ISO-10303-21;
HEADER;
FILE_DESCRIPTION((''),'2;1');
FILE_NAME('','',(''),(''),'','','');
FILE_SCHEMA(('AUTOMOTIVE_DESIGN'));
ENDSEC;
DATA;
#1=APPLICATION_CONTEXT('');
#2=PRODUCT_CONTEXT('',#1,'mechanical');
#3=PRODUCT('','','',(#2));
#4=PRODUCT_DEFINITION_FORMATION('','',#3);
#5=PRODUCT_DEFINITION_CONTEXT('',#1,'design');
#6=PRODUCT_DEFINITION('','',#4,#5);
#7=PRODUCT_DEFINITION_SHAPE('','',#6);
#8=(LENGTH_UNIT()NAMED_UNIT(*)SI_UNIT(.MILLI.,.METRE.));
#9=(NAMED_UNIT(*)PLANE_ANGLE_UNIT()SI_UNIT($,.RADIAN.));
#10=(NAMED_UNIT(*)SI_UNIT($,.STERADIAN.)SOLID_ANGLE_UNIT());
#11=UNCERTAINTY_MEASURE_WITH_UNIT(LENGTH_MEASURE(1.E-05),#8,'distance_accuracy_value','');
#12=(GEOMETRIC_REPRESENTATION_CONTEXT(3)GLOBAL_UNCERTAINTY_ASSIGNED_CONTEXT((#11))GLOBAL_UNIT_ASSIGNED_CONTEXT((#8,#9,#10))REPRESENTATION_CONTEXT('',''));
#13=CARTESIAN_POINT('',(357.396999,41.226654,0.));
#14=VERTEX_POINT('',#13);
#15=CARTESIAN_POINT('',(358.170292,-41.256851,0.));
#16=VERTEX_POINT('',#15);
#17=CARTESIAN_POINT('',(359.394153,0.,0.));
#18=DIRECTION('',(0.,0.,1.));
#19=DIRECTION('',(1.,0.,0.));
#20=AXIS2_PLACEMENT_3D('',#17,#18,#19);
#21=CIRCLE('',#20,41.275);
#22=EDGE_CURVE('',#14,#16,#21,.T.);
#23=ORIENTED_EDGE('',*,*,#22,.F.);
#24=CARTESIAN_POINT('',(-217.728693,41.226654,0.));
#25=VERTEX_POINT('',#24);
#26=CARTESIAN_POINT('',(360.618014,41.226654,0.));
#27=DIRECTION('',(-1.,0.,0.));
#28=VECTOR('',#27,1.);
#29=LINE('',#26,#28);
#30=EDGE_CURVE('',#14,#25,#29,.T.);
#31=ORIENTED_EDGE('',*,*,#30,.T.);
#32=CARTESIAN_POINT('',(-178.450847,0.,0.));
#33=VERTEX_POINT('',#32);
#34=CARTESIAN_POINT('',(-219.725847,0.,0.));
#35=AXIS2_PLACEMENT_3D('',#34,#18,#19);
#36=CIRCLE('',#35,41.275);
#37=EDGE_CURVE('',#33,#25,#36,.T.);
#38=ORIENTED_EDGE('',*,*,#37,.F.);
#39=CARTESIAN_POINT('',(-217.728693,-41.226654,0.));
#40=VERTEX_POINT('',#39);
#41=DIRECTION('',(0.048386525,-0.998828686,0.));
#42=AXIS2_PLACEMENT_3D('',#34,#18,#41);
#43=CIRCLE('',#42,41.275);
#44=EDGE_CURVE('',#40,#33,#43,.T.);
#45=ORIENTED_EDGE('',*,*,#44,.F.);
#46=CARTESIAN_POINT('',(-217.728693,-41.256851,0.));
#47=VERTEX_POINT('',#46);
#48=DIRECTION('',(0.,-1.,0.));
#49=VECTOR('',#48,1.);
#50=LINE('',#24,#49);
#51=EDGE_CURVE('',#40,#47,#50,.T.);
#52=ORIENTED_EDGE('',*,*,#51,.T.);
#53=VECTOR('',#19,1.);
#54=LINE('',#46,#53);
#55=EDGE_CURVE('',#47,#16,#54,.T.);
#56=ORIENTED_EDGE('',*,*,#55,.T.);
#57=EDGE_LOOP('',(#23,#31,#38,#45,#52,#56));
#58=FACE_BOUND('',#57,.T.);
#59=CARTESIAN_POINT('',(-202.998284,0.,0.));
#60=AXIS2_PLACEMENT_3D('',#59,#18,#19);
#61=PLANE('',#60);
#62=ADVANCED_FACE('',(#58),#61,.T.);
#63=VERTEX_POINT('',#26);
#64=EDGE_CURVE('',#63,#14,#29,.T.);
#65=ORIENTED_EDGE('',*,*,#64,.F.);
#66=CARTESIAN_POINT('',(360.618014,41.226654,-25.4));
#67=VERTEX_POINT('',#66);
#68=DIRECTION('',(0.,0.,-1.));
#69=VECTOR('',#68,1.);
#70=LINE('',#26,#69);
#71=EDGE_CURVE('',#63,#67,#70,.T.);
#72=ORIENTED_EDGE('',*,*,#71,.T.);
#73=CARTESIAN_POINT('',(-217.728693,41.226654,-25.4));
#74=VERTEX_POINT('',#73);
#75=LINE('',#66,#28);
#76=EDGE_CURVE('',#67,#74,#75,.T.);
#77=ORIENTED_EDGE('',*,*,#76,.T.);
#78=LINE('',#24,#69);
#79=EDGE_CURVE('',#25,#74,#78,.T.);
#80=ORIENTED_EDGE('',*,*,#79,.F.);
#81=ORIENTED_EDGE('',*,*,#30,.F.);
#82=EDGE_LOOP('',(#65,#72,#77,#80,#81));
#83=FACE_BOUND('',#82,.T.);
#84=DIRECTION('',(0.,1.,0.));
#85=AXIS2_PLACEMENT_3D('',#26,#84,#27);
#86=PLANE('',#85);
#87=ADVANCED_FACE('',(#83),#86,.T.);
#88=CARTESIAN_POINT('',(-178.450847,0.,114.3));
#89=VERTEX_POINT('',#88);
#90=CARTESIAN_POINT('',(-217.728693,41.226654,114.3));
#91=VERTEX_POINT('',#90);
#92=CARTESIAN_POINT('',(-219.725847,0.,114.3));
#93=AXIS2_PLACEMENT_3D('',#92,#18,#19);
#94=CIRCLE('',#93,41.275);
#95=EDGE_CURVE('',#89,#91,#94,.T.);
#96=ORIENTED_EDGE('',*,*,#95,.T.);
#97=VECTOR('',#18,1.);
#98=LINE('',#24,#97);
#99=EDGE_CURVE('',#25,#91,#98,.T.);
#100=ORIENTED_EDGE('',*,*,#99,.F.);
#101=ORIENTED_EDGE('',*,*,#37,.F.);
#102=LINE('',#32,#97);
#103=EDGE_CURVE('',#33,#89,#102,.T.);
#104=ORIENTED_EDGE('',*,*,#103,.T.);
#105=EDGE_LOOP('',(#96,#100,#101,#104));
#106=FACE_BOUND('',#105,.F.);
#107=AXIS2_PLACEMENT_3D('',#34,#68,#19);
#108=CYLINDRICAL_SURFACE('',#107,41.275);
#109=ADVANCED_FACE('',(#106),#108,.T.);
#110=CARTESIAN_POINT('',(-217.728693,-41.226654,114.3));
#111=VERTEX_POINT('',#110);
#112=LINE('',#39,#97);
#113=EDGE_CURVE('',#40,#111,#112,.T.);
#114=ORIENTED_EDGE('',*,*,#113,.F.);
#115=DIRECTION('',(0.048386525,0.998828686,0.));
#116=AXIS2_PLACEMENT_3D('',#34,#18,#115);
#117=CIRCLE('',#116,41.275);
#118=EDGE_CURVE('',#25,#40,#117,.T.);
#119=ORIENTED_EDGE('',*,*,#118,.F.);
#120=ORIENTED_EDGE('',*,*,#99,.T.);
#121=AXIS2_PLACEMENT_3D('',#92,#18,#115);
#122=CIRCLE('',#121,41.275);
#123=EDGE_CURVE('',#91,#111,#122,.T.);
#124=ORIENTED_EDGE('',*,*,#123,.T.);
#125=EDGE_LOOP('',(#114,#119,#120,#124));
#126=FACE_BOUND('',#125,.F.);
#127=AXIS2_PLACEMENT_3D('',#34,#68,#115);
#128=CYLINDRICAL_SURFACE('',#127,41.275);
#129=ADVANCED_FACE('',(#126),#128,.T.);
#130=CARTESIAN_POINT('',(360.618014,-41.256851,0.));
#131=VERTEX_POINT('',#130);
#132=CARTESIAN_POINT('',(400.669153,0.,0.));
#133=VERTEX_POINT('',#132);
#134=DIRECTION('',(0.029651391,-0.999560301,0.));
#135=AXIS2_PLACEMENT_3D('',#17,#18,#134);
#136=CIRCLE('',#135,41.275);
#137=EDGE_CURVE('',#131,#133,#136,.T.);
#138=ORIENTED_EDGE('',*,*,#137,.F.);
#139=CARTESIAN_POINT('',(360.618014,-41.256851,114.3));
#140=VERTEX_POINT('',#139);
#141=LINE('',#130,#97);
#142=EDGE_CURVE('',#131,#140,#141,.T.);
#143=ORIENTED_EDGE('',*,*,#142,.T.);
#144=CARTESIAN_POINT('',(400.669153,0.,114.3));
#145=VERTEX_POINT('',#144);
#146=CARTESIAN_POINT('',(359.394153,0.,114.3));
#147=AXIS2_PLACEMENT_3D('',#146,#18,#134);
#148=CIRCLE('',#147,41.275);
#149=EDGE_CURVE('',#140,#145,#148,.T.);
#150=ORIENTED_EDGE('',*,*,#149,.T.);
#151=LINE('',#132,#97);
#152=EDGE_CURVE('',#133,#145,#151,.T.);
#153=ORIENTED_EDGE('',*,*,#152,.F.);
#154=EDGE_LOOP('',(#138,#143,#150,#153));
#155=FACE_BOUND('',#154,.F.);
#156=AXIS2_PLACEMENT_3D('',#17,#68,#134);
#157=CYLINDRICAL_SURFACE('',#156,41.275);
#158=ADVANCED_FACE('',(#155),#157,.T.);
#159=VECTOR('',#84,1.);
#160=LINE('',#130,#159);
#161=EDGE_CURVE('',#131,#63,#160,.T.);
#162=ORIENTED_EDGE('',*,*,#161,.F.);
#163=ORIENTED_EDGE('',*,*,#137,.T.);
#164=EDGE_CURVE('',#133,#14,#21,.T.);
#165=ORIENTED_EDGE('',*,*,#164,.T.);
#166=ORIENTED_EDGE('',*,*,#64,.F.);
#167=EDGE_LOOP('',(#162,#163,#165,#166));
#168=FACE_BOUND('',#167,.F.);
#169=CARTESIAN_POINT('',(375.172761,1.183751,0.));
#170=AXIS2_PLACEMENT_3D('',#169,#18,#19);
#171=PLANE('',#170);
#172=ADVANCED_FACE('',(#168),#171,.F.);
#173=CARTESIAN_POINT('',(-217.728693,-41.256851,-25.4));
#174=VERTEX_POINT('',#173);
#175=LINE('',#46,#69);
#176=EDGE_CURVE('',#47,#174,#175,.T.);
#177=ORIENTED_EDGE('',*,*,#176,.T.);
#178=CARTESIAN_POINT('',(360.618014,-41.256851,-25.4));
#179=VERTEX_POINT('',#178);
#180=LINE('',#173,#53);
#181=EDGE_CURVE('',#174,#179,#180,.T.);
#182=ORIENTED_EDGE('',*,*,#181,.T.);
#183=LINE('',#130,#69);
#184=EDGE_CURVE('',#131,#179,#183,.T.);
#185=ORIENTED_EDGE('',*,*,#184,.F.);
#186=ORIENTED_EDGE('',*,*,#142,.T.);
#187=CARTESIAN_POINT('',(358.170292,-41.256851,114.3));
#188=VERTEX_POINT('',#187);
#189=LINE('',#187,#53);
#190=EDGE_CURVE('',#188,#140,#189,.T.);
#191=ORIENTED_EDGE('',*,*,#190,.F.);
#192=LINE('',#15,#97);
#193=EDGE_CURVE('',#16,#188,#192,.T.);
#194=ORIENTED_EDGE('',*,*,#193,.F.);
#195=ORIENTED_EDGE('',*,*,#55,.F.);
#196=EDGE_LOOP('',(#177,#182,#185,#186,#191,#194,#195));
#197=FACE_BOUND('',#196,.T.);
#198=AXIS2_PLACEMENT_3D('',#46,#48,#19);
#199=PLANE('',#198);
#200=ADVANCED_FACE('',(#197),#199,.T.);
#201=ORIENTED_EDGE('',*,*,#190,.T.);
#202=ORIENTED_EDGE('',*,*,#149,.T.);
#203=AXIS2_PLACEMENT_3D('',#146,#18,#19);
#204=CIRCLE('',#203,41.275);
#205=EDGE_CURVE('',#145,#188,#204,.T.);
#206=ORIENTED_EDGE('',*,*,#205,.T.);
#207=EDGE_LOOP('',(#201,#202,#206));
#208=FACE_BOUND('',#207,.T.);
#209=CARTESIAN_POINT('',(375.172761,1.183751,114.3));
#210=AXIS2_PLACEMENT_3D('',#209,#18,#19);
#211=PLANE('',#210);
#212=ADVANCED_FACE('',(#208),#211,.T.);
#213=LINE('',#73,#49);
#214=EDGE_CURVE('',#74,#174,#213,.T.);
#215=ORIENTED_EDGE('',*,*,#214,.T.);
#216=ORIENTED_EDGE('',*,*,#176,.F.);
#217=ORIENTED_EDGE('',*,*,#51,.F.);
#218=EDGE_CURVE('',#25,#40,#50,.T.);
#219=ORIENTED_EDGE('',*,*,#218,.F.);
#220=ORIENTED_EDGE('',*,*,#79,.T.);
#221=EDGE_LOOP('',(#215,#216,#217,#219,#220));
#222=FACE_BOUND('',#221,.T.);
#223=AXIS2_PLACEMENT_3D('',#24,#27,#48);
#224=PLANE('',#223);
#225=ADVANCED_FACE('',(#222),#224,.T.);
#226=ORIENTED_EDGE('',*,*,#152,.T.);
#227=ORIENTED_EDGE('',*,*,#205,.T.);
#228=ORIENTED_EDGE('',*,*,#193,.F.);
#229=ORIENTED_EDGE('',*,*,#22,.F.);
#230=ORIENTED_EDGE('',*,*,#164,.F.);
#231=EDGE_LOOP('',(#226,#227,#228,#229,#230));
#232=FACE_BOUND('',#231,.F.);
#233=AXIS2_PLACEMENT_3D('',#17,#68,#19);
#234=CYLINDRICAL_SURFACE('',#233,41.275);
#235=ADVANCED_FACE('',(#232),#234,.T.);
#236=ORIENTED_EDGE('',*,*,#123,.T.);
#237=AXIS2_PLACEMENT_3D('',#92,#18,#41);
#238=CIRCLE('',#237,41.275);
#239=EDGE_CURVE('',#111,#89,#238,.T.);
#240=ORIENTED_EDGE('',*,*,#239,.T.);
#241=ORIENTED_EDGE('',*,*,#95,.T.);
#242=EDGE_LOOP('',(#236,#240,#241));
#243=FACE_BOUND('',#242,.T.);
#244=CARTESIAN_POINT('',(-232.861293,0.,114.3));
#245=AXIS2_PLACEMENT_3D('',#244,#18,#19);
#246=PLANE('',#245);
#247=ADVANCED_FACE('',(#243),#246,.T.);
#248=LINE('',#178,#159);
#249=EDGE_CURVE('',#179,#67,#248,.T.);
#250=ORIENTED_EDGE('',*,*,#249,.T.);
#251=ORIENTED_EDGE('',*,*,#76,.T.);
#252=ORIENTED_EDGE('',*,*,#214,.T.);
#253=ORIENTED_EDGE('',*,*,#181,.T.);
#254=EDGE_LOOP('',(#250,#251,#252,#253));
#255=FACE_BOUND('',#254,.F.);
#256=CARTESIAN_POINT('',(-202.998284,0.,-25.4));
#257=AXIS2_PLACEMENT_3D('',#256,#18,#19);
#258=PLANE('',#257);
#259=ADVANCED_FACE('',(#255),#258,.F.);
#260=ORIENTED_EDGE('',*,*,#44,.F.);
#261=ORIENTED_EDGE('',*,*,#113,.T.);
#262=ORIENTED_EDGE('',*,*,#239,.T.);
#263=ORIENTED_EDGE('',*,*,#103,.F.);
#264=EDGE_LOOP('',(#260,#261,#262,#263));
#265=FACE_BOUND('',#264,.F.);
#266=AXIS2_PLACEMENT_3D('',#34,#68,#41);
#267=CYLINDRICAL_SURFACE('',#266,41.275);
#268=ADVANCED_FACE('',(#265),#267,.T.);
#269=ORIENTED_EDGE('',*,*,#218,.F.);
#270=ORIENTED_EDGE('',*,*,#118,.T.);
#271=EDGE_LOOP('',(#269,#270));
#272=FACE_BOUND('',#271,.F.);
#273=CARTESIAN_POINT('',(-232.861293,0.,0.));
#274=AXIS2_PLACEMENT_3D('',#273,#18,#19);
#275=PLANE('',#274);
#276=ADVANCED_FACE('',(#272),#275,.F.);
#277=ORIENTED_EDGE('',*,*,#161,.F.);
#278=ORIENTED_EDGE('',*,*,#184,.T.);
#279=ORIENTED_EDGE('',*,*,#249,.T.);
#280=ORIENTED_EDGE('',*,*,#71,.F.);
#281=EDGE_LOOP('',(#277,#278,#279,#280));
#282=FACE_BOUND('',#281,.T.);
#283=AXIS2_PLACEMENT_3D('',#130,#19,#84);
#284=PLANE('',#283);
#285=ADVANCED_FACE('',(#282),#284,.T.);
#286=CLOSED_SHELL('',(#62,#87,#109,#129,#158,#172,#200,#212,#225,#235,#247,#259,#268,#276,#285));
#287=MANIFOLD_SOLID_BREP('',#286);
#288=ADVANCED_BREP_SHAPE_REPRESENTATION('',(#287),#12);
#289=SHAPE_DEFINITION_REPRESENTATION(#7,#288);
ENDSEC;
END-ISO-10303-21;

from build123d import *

# Parameters (mm, degrees)
F1_DEPTH = 114.3
F2_DEPTH = 25.4


with BuildPart() as f1:
    # F0 (on Top) → F1 (new body)
    with BuildSketch(Plane.XY):
        with BuildLine():
            ThreePointArc((400.6691527557, 0), (387.8651300869, 29.8835920667), (357.3969989189, 41.2266540184))
            Line((357.3969989189, 41.2266540184), (360.6180139352, 41.2266540184))
            Line((360.6180139352, 41.2266540184), (360.6180139352, -41.2568514166))
            ThreePointArc((360.6180139352, -41.2568514166), (389.0095245682, -28.7498761286), (400.6691527557, 0))
        make_face()
        with BuildLine():
            Line((360.6180139352, 41.2266540184), (357.3969989189, 41.2266540184))
            ThreePointArc((357.3969989189, 41.2266540184), (318.1209665249, -0.3869410216), (358.1702915763, -41.2568514166))
            Line((358.1702915763, -41.2568514166), (360.6180139352, -41.2568514166))
            Line((360.6180139352, -41.2568514166), (360.6180139352, 41.2266540184))
        make_face()
    extrude(amount=F1_DEPTH)



with BuildPart() as f1b:
    # F0 (on Top) → F1, piece 2 (new body)
    with BuildSketch(Plane.XY):
        with BuildLine():
            Line((-217.7286934074, -41.2266540184), (-217.7286934074, 41.2266540184))
            ThreePointArc((-217.7286934074, 41.2266540184), (-261.0008472443, 0), (-217.7286934074, -41.2266540184))
        make_face()
        with BuildLine():
            ThreePointArc((-217.7286934074, -41.2266540184), (-189.8422551776, -28.4709773312), (-178.4508472443, 0))
            ThreePointArc((-178.4508472443, 0), (-189.8422551776, 28.4709773312), (-217.7286934074, 41.2266540184))
            Line((-217.7286934074, 41.2266540184), (-217.7286934074, -41.2266540184))
        make_face()
    extrude(amount=F1_DEPTH)


with BuildPart() as f1_1:
    add(f1.part)

    add(f1b.part)  # F2 merges F1b
    # F0 (on Top) → F2 (join)
    with BuildSketch(Plane.XY):
        with BuildLine():
            ThreePointArc((-217.7286934074, -41.2266540184), (-189.8422551776, -28.4709773312), (-178.4508472443, 0))
            ThreePointArc((-178.4508472443, 0), (-189.8422551776, 28.4709773312), (-217.7286934074, 41.2266540184))
            Line((-217.7286934074, 41.2266540184), (-217.7286934074, -41.2266540184))
        make_face()
        with BuildLine():
            ThreePointArc((-217.7286934074, 41.2266540184), (-189.8422551776, 28.4709773312), (-178.4508472443, 0))
            ThreePointArc((-178.4508472443, 0), (-189.8422551776, -28.4709773312), (-217.7286934074, -41.2266540184))
            Line((-217.7286934074, -41.2266540184), (-217.7286934074, -41.2568514166))
            Line((-217.7286934074, -41.2568514166), (358.1702915763, -41.2568514166))
            ThreePointArc((358.1702915763, -41.2568514166), (318.1209665249, -0.3869410216), (357.3969989189, 41.2266540184))
            Line((357.3969989189, 41.2266540184), (-217.7286934074, 41.2266540184))
        make_face()
        with BuildLine():
            Line((360.6180139352, 41.2266540184), (357.3969989189, 41.2266540184))
            ThreePointArc((357.3969989189, 41.2266540184), (318.1209665249, -0.3869410216), (358.1702915763, -41.2568514166))
            Line((358.1702915763, -41.2568514166), (360.6180139352, -41.2568514166))
            Line((360.6180139352, -41.2568514166), (360.6180139352, 41.2266540184))
        make_face()
    extrude(amount=-F2_DEPTH)


solid = f1_1.part
